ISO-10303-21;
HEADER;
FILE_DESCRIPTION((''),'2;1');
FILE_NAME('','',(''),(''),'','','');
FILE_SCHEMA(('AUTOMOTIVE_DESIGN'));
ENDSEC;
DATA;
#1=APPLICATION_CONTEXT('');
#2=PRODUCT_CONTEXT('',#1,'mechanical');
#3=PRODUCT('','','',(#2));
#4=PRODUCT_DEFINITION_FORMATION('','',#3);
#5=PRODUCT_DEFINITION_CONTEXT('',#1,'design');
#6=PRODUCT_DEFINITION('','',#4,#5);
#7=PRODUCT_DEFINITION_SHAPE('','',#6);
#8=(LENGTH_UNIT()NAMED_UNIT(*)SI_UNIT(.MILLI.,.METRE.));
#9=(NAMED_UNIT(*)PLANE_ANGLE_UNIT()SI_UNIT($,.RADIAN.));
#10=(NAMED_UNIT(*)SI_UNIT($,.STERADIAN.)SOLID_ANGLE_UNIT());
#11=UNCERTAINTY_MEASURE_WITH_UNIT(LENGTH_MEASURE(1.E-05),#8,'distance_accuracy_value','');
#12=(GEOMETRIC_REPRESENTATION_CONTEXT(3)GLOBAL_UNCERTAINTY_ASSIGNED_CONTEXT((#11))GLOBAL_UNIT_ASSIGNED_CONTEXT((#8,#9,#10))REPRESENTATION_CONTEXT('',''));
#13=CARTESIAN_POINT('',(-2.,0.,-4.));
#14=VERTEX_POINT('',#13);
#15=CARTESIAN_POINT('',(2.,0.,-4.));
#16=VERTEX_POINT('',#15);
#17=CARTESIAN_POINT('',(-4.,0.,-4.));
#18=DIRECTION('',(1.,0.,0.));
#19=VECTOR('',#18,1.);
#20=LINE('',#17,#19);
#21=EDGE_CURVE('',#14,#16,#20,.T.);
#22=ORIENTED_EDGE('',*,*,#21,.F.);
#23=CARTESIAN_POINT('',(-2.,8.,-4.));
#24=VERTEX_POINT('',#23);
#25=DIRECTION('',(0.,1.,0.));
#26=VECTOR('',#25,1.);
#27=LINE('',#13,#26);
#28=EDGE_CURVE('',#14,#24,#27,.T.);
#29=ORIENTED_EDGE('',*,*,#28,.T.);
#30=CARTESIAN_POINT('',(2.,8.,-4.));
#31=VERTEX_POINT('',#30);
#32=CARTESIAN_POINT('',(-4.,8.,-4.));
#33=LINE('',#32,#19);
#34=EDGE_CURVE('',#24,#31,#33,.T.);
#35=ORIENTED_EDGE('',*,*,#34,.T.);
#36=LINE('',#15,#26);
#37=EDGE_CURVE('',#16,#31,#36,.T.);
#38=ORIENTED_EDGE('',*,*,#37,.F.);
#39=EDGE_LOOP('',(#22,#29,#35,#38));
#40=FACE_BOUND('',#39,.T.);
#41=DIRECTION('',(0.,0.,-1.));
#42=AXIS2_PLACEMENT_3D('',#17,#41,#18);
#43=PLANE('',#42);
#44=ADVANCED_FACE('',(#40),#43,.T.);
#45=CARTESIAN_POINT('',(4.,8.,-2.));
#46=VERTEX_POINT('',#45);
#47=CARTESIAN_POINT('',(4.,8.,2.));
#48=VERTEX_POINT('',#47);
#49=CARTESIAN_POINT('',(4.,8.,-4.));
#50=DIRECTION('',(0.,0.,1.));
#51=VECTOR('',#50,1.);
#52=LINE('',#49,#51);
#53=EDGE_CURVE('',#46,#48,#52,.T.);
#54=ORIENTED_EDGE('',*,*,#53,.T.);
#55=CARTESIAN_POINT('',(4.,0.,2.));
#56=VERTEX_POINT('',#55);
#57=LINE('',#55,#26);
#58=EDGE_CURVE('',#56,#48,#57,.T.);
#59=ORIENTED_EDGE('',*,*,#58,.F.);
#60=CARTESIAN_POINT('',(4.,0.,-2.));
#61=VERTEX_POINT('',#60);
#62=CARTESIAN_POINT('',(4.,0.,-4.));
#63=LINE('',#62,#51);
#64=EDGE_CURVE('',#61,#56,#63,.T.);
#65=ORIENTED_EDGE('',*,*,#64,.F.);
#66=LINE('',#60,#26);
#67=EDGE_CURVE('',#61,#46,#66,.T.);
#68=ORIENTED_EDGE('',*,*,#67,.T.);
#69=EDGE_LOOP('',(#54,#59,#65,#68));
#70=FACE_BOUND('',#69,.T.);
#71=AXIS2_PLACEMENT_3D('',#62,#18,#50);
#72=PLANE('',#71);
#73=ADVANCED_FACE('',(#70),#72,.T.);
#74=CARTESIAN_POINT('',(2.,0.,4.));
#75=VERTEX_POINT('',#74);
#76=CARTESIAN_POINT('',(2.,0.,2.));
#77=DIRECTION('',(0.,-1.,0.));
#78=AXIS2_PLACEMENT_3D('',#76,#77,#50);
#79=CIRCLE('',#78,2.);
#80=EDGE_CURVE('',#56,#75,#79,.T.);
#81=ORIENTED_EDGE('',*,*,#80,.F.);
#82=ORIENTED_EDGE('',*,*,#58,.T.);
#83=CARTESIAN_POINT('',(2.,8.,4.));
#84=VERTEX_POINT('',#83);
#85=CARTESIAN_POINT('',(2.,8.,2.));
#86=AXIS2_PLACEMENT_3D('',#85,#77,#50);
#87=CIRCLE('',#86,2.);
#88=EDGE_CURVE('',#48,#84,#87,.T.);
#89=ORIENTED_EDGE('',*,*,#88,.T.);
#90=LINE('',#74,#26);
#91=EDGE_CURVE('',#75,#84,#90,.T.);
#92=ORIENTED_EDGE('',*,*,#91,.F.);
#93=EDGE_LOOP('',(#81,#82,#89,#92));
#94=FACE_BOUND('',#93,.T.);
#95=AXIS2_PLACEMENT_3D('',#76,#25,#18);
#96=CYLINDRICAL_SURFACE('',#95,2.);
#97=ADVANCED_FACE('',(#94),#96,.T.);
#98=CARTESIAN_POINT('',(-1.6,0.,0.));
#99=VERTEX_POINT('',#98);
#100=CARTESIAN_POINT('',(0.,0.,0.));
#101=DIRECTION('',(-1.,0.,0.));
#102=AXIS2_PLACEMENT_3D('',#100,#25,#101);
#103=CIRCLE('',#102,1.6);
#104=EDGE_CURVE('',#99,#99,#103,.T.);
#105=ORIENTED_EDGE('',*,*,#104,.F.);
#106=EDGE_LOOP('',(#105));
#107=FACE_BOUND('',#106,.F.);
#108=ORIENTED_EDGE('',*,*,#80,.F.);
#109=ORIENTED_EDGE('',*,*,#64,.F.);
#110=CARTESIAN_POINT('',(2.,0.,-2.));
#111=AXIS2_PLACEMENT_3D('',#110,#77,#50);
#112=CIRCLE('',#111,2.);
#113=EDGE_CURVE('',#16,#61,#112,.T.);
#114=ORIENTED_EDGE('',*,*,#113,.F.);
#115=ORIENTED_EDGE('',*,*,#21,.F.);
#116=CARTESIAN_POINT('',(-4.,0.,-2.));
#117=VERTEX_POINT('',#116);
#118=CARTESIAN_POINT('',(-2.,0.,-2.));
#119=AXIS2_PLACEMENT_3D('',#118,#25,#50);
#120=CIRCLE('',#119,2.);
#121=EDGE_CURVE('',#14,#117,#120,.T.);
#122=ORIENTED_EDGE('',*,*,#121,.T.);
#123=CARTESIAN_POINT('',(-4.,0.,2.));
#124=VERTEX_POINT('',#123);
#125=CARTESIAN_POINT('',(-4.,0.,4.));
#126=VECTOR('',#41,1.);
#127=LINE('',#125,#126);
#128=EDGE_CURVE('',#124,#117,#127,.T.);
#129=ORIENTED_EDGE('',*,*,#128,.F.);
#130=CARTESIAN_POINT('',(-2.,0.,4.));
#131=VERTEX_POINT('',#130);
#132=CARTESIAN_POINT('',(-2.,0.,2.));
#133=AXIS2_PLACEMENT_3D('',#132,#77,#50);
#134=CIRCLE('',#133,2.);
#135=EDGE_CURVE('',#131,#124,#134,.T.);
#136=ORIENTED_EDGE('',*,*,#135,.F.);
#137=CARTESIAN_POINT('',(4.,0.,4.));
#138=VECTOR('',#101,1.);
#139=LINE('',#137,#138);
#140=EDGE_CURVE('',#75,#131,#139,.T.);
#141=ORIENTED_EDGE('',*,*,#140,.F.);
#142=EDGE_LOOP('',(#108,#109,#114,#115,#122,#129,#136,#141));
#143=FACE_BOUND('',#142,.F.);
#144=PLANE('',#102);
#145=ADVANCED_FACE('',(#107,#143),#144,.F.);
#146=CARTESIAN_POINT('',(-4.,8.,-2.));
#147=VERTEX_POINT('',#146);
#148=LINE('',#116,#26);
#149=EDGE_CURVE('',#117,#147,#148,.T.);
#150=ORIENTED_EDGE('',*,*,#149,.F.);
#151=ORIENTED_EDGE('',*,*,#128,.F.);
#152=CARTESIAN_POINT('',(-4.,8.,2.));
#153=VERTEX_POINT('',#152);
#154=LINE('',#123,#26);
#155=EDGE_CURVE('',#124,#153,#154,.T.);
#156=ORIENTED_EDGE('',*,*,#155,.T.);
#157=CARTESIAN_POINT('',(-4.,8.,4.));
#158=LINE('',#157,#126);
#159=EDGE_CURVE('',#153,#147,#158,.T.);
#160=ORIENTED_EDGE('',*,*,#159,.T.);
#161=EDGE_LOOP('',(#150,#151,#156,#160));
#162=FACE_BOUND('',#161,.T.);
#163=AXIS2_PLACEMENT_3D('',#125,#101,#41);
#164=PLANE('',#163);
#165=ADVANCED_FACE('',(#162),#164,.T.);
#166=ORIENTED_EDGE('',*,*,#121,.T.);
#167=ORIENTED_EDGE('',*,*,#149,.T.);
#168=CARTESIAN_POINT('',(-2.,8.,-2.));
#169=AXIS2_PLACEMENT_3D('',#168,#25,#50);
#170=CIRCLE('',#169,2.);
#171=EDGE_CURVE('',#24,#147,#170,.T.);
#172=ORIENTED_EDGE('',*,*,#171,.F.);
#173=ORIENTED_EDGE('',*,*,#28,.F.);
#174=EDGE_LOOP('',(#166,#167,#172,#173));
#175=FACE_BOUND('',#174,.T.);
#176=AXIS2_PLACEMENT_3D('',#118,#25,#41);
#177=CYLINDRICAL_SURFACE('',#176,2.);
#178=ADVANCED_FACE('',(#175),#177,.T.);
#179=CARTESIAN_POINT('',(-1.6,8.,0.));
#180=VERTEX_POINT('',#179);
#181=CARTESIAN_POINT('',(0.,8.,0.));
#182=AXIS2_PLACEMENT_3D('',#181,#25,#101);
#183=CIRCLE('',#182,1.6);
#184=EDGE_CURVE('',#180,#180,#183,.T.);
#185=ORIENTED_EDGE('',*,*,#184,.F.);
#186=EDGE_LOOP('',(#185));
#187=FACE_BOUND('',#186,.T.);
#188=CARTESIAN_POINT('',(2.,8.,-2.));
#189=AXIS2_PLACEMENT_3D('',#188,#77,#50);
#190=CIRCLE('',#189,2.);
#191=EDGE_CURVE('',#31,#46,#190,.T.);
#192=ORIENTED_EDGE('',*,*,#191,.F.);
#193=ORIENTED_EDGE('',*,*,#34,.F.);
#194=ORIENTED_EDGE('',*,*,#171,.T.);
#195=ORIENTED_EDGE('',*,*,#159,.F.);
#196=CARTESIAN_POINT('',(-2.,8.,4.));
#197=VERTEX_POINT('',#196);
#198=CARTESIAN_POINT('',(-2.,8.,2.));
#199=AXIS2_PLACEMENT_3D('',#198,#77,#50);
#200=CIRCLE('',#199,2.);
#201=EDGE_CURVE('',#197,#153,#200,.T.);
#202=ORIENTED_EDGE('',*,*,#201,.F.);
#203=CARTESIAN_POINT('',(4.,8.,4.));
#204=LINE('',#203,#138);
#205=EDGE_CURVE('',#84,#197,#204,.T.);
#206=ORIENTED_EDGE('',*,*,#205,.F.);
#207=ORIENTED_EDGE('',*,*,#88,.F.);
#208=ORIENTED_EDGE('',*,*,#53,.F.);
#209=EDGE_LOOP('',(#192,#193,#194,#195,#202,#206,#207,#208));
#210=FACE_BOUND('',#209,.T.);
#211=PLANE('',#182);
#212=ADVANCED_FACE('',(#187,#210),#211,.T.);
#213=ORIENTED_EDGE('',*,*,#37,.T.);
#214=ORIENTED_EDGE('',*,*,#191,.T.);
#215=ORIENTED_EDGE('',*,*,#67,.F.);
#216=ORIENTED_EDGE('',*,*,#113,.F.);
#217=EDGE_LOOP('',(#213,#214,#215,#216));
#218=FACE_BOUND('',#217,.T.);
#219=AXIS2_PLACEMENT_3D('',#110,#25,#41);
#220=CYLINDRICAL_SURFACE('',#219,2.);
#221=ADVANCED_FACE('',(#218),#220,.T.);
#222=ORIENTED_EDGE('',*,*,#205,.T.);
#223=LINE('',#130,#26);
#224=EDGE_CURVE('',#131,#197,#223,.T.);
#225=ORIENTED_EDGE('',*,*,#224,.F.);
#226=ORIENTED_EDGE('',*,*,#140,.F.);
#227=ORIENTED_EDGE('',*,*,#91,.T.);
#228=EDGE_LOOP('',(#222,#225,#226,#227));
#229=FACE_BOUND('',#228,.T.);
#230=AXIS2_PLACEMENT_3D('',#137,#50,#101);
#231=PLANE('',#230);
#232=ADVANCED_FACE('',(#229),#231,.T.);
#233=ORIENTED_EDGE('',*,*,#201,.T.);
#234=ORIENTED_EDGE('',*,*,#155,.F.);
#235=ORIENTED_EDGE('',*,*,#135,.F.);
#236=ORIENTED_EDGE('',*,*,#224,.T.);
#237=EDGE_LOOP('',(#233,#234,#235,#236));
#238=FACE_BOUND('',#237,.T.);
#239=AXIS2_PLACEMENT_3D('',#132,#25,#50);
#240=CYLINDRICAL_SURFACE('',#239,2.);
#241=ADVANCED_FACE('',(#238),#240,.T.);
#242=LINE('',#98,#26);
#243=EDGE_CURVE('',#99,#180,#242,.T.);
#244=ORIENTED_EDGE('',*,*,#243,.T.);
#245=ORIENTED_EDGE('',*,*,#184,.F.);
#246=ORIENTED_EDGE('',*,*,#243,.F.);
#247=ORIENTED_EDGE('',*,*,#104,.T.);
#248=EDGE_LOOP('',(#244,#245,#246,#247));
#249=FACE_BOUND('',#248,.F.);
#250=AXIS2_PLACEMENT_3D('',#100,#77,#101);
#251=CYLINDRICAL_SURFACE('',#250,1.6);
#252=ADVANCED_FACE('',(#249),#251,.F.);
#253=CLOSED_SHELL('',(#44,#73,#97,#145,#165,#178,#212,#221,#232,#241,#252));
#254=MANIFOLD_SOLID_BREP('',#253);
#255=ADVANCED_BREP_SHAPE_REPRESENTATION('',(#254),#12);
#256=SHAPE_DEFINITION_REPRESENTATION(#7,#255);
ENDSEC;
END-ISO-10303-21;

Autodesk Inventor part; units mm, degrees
ref_plane "YZ Plane" through (0, 0, 0) normal (1, 0, 0) x (0, 1, 0)
ref_plane "XZ Plane" through (0, 0, 0) normal (0, 1, 0) x (-1, 0, 0)
ref_plane "XY Plane" through (0, 0, 0) normal (0, 0, 1) x (1, 0, 0)
sketch "Sketch1" plane through (0, 0, 0) normal (0, 1, 0) x (-1, 0, 0)
  circle A0 centre (0, 0) radius 2.5
  circle A1 centre (0, 0) radius 1.6
  line L0 (4, -4) -> (-4, -4)
  line L1 (-4, -4) -> (-4, 4)
  line L2 (-4, 4) -> (4, 4)
  line L3 (4, 4) -> (4, -4)
  line L4 (4, -4) -> (-4, 4) construction
  line L5 (-4, -4) -> (4, 4) construction
  dimension "d0" = 5
  dimension "d1" = 3.2
  dimension "d11" = 8
  dimension "d12" = 8
extrude "Extrusion1" add sketch "Sketch1" along normal blind 8 contours A0 | L0 L1 L2 L3
fillet "Fillet1" radius 2 4 edges at (4, 4, 4) (-4, 4, 4) (4, 4, -4) (-4, 4, -4)
properties part number "8mm Spacer"
